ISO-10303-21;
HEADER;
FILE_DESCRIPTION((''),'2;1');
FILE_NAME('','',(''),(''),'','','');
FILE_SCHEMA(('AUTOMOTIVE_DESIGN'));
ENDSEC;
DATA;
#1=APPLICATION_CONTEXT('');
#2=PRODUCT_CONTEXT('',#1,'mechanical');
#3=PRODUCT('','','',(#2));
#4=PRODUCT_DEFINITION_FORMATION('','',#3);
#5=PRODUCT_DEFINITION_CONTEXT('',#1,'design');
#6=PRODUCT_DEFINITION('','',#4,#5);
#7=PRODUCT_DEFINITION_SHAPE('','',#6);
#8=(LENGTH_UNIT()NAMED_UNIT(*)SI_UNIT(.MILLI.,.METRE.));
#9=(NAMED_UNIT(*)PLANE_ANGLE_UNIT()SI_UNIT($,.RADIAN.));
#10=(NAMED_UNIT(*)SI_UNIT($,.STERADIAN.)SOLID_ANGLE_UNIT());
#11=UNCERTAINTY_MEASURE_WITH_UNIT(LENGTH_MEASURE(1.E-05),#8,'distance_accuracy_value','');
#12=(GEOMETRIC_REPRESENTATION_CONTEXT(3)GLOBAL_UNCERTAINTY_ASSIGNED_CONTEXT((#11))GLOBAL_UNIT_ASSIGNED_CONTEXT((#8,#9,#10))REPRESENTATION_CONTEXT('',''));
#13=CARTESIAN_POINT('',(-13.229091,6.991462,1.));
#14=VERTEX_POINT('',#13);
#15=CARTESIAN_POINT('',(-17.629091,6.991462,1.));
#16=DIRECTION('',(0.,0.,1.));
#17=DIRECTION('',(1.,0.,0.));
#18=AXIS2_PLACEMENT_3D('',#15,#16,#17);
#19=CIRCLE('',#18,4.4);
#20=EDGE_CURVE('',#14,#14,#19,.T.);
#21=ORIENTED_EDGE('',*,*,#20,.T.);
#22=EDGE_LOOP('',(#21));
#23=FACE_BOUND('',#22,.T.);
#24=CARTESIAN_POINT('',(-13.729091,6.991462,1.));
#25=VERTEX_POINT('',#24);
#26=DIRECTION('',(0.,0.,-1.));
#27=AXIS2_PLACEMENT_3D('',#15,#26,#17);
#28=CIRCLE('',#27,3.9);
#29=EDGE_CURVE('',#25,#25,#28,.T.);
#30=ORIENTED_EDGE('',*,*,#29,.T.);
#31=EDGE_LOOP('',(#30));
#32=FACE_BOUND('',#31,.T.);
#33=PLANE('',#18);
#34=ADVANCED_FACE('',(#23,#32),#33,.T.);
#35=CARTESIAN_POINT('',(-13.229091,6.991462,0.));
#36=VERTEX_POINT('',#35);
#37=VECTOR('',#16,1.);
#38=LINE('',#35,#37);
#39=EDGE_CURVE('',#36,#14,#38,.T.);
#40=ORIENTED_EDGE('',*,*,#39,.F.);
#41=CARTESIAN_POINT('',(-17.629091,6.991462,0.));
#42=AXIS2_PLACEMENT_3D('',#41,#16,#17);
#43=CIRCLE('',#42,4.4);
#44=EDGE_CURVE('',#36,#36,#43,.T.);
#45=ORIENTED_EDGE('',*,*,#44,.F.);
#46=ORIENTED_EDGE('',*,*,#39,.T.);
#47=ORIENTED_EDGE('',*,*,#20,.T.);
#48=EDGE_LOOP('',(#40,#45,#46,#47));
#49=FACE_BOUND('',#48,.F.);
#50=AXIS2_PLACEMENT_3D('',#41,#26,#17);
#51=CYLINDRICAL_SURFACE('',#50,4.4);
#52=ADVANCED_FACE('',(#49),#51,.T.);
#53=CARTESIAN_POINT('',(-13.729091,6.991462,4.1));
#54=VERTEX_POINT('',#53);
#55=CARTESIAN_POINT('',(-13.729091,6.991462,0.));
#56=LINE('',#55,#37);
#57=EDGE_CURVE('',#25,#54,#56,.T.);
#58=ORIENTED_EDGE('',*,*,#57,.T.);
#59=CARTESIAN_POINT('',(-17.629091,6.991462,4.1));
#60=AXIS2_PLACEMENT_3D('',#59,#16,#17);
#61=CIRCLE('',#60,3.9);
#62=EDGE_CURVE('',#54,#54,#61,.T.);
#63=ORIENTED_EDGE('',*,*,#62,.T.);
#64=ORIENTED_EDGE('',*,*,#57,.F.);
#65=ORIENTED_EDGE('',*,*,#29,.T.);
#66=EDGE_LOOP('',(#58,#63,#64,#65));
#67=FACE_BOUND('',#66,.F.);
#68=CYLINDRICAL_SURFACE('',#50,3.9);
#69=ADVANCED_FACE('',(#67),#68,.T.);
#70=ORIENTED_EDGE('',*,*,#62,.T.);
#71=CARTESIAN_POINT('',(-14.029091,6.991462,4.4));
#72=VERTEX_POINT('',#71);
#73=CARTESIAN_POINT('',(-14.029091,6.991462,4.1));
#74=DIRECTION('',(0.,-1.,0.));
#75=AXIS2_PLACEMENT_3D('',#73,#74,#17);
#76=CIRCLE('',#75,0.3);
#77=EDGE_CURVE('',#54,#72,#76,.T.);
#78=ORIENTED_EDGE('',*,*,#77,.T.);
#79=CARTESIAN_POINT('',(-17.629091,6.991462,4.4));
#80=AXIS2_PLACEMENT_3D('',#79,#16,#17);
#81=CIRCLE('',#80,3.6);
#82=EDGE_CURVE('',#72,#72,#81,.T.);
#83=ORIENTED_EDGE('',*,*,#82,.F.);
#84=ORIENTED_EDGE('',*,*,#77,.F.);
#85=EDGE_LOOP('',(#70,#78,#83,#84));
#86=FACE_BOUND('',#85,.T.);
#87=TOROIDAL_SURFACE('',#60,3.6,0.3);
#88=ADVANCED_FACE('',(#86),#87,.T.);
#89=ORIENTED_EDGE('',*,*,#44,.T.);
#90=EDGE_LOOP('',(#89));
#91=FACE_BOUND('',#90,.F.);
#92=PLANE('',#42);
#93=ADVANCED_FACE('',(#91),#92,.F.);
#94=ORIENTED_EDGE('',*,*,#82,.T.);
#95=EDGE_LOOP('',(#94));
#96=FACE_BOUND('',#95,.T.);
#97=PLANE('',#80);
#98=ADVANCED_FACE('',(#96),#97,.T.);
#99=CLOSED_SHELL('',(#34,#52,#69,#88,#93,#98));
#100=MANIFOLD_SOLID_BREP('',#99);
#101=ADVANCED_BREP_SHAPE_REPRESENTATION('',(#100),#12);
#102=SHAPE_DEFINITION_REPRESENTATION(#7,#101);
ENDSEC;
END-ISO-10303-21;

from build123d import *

# Parameters (mm, degrees)
F0_R     = 4.4
F0_R_2   = 3.9
F1_DEPTH = 1
F2_DEPTH = 4.4
F3_R     = 0.3


# Not quite as in the source:
# - a feature names something its author has since deleted; it is built from what else it names


with BuildPart() as f1:
    # F0 (on Top) → F1 (new body)
    with BuildSketch(Plane.XY):
        with Locations((-17.6290911883, 6.9914618582)):
            Circle(F0_R)
        with Locations((-17.6290911883, 6.9914618582)):
            Circle(F0_R_2, mode=Mode.SUBTRACT)
        with Locations((-17.6290911883, 6.9914618582)):
            Circle(F0_R_2)
    extrude(amount=F1_DEPTH)

    # F0 (on Top) → F2 (join)
    with BuildSketch(Plane.XY):
        with Locations((-17.6290911883, 6.9914618582)):
            Circle(F0_R_2)
    extrude(amount=F2_DEPTH)

    # F3
    f3_edges = [f1.edges().sort_by_distance(p)[0] for p in [
        (-21.529091, 6.991462, 4.4),
    ]]
    fillet(f3_edges, radius=F3_R)


solid = f1.part
